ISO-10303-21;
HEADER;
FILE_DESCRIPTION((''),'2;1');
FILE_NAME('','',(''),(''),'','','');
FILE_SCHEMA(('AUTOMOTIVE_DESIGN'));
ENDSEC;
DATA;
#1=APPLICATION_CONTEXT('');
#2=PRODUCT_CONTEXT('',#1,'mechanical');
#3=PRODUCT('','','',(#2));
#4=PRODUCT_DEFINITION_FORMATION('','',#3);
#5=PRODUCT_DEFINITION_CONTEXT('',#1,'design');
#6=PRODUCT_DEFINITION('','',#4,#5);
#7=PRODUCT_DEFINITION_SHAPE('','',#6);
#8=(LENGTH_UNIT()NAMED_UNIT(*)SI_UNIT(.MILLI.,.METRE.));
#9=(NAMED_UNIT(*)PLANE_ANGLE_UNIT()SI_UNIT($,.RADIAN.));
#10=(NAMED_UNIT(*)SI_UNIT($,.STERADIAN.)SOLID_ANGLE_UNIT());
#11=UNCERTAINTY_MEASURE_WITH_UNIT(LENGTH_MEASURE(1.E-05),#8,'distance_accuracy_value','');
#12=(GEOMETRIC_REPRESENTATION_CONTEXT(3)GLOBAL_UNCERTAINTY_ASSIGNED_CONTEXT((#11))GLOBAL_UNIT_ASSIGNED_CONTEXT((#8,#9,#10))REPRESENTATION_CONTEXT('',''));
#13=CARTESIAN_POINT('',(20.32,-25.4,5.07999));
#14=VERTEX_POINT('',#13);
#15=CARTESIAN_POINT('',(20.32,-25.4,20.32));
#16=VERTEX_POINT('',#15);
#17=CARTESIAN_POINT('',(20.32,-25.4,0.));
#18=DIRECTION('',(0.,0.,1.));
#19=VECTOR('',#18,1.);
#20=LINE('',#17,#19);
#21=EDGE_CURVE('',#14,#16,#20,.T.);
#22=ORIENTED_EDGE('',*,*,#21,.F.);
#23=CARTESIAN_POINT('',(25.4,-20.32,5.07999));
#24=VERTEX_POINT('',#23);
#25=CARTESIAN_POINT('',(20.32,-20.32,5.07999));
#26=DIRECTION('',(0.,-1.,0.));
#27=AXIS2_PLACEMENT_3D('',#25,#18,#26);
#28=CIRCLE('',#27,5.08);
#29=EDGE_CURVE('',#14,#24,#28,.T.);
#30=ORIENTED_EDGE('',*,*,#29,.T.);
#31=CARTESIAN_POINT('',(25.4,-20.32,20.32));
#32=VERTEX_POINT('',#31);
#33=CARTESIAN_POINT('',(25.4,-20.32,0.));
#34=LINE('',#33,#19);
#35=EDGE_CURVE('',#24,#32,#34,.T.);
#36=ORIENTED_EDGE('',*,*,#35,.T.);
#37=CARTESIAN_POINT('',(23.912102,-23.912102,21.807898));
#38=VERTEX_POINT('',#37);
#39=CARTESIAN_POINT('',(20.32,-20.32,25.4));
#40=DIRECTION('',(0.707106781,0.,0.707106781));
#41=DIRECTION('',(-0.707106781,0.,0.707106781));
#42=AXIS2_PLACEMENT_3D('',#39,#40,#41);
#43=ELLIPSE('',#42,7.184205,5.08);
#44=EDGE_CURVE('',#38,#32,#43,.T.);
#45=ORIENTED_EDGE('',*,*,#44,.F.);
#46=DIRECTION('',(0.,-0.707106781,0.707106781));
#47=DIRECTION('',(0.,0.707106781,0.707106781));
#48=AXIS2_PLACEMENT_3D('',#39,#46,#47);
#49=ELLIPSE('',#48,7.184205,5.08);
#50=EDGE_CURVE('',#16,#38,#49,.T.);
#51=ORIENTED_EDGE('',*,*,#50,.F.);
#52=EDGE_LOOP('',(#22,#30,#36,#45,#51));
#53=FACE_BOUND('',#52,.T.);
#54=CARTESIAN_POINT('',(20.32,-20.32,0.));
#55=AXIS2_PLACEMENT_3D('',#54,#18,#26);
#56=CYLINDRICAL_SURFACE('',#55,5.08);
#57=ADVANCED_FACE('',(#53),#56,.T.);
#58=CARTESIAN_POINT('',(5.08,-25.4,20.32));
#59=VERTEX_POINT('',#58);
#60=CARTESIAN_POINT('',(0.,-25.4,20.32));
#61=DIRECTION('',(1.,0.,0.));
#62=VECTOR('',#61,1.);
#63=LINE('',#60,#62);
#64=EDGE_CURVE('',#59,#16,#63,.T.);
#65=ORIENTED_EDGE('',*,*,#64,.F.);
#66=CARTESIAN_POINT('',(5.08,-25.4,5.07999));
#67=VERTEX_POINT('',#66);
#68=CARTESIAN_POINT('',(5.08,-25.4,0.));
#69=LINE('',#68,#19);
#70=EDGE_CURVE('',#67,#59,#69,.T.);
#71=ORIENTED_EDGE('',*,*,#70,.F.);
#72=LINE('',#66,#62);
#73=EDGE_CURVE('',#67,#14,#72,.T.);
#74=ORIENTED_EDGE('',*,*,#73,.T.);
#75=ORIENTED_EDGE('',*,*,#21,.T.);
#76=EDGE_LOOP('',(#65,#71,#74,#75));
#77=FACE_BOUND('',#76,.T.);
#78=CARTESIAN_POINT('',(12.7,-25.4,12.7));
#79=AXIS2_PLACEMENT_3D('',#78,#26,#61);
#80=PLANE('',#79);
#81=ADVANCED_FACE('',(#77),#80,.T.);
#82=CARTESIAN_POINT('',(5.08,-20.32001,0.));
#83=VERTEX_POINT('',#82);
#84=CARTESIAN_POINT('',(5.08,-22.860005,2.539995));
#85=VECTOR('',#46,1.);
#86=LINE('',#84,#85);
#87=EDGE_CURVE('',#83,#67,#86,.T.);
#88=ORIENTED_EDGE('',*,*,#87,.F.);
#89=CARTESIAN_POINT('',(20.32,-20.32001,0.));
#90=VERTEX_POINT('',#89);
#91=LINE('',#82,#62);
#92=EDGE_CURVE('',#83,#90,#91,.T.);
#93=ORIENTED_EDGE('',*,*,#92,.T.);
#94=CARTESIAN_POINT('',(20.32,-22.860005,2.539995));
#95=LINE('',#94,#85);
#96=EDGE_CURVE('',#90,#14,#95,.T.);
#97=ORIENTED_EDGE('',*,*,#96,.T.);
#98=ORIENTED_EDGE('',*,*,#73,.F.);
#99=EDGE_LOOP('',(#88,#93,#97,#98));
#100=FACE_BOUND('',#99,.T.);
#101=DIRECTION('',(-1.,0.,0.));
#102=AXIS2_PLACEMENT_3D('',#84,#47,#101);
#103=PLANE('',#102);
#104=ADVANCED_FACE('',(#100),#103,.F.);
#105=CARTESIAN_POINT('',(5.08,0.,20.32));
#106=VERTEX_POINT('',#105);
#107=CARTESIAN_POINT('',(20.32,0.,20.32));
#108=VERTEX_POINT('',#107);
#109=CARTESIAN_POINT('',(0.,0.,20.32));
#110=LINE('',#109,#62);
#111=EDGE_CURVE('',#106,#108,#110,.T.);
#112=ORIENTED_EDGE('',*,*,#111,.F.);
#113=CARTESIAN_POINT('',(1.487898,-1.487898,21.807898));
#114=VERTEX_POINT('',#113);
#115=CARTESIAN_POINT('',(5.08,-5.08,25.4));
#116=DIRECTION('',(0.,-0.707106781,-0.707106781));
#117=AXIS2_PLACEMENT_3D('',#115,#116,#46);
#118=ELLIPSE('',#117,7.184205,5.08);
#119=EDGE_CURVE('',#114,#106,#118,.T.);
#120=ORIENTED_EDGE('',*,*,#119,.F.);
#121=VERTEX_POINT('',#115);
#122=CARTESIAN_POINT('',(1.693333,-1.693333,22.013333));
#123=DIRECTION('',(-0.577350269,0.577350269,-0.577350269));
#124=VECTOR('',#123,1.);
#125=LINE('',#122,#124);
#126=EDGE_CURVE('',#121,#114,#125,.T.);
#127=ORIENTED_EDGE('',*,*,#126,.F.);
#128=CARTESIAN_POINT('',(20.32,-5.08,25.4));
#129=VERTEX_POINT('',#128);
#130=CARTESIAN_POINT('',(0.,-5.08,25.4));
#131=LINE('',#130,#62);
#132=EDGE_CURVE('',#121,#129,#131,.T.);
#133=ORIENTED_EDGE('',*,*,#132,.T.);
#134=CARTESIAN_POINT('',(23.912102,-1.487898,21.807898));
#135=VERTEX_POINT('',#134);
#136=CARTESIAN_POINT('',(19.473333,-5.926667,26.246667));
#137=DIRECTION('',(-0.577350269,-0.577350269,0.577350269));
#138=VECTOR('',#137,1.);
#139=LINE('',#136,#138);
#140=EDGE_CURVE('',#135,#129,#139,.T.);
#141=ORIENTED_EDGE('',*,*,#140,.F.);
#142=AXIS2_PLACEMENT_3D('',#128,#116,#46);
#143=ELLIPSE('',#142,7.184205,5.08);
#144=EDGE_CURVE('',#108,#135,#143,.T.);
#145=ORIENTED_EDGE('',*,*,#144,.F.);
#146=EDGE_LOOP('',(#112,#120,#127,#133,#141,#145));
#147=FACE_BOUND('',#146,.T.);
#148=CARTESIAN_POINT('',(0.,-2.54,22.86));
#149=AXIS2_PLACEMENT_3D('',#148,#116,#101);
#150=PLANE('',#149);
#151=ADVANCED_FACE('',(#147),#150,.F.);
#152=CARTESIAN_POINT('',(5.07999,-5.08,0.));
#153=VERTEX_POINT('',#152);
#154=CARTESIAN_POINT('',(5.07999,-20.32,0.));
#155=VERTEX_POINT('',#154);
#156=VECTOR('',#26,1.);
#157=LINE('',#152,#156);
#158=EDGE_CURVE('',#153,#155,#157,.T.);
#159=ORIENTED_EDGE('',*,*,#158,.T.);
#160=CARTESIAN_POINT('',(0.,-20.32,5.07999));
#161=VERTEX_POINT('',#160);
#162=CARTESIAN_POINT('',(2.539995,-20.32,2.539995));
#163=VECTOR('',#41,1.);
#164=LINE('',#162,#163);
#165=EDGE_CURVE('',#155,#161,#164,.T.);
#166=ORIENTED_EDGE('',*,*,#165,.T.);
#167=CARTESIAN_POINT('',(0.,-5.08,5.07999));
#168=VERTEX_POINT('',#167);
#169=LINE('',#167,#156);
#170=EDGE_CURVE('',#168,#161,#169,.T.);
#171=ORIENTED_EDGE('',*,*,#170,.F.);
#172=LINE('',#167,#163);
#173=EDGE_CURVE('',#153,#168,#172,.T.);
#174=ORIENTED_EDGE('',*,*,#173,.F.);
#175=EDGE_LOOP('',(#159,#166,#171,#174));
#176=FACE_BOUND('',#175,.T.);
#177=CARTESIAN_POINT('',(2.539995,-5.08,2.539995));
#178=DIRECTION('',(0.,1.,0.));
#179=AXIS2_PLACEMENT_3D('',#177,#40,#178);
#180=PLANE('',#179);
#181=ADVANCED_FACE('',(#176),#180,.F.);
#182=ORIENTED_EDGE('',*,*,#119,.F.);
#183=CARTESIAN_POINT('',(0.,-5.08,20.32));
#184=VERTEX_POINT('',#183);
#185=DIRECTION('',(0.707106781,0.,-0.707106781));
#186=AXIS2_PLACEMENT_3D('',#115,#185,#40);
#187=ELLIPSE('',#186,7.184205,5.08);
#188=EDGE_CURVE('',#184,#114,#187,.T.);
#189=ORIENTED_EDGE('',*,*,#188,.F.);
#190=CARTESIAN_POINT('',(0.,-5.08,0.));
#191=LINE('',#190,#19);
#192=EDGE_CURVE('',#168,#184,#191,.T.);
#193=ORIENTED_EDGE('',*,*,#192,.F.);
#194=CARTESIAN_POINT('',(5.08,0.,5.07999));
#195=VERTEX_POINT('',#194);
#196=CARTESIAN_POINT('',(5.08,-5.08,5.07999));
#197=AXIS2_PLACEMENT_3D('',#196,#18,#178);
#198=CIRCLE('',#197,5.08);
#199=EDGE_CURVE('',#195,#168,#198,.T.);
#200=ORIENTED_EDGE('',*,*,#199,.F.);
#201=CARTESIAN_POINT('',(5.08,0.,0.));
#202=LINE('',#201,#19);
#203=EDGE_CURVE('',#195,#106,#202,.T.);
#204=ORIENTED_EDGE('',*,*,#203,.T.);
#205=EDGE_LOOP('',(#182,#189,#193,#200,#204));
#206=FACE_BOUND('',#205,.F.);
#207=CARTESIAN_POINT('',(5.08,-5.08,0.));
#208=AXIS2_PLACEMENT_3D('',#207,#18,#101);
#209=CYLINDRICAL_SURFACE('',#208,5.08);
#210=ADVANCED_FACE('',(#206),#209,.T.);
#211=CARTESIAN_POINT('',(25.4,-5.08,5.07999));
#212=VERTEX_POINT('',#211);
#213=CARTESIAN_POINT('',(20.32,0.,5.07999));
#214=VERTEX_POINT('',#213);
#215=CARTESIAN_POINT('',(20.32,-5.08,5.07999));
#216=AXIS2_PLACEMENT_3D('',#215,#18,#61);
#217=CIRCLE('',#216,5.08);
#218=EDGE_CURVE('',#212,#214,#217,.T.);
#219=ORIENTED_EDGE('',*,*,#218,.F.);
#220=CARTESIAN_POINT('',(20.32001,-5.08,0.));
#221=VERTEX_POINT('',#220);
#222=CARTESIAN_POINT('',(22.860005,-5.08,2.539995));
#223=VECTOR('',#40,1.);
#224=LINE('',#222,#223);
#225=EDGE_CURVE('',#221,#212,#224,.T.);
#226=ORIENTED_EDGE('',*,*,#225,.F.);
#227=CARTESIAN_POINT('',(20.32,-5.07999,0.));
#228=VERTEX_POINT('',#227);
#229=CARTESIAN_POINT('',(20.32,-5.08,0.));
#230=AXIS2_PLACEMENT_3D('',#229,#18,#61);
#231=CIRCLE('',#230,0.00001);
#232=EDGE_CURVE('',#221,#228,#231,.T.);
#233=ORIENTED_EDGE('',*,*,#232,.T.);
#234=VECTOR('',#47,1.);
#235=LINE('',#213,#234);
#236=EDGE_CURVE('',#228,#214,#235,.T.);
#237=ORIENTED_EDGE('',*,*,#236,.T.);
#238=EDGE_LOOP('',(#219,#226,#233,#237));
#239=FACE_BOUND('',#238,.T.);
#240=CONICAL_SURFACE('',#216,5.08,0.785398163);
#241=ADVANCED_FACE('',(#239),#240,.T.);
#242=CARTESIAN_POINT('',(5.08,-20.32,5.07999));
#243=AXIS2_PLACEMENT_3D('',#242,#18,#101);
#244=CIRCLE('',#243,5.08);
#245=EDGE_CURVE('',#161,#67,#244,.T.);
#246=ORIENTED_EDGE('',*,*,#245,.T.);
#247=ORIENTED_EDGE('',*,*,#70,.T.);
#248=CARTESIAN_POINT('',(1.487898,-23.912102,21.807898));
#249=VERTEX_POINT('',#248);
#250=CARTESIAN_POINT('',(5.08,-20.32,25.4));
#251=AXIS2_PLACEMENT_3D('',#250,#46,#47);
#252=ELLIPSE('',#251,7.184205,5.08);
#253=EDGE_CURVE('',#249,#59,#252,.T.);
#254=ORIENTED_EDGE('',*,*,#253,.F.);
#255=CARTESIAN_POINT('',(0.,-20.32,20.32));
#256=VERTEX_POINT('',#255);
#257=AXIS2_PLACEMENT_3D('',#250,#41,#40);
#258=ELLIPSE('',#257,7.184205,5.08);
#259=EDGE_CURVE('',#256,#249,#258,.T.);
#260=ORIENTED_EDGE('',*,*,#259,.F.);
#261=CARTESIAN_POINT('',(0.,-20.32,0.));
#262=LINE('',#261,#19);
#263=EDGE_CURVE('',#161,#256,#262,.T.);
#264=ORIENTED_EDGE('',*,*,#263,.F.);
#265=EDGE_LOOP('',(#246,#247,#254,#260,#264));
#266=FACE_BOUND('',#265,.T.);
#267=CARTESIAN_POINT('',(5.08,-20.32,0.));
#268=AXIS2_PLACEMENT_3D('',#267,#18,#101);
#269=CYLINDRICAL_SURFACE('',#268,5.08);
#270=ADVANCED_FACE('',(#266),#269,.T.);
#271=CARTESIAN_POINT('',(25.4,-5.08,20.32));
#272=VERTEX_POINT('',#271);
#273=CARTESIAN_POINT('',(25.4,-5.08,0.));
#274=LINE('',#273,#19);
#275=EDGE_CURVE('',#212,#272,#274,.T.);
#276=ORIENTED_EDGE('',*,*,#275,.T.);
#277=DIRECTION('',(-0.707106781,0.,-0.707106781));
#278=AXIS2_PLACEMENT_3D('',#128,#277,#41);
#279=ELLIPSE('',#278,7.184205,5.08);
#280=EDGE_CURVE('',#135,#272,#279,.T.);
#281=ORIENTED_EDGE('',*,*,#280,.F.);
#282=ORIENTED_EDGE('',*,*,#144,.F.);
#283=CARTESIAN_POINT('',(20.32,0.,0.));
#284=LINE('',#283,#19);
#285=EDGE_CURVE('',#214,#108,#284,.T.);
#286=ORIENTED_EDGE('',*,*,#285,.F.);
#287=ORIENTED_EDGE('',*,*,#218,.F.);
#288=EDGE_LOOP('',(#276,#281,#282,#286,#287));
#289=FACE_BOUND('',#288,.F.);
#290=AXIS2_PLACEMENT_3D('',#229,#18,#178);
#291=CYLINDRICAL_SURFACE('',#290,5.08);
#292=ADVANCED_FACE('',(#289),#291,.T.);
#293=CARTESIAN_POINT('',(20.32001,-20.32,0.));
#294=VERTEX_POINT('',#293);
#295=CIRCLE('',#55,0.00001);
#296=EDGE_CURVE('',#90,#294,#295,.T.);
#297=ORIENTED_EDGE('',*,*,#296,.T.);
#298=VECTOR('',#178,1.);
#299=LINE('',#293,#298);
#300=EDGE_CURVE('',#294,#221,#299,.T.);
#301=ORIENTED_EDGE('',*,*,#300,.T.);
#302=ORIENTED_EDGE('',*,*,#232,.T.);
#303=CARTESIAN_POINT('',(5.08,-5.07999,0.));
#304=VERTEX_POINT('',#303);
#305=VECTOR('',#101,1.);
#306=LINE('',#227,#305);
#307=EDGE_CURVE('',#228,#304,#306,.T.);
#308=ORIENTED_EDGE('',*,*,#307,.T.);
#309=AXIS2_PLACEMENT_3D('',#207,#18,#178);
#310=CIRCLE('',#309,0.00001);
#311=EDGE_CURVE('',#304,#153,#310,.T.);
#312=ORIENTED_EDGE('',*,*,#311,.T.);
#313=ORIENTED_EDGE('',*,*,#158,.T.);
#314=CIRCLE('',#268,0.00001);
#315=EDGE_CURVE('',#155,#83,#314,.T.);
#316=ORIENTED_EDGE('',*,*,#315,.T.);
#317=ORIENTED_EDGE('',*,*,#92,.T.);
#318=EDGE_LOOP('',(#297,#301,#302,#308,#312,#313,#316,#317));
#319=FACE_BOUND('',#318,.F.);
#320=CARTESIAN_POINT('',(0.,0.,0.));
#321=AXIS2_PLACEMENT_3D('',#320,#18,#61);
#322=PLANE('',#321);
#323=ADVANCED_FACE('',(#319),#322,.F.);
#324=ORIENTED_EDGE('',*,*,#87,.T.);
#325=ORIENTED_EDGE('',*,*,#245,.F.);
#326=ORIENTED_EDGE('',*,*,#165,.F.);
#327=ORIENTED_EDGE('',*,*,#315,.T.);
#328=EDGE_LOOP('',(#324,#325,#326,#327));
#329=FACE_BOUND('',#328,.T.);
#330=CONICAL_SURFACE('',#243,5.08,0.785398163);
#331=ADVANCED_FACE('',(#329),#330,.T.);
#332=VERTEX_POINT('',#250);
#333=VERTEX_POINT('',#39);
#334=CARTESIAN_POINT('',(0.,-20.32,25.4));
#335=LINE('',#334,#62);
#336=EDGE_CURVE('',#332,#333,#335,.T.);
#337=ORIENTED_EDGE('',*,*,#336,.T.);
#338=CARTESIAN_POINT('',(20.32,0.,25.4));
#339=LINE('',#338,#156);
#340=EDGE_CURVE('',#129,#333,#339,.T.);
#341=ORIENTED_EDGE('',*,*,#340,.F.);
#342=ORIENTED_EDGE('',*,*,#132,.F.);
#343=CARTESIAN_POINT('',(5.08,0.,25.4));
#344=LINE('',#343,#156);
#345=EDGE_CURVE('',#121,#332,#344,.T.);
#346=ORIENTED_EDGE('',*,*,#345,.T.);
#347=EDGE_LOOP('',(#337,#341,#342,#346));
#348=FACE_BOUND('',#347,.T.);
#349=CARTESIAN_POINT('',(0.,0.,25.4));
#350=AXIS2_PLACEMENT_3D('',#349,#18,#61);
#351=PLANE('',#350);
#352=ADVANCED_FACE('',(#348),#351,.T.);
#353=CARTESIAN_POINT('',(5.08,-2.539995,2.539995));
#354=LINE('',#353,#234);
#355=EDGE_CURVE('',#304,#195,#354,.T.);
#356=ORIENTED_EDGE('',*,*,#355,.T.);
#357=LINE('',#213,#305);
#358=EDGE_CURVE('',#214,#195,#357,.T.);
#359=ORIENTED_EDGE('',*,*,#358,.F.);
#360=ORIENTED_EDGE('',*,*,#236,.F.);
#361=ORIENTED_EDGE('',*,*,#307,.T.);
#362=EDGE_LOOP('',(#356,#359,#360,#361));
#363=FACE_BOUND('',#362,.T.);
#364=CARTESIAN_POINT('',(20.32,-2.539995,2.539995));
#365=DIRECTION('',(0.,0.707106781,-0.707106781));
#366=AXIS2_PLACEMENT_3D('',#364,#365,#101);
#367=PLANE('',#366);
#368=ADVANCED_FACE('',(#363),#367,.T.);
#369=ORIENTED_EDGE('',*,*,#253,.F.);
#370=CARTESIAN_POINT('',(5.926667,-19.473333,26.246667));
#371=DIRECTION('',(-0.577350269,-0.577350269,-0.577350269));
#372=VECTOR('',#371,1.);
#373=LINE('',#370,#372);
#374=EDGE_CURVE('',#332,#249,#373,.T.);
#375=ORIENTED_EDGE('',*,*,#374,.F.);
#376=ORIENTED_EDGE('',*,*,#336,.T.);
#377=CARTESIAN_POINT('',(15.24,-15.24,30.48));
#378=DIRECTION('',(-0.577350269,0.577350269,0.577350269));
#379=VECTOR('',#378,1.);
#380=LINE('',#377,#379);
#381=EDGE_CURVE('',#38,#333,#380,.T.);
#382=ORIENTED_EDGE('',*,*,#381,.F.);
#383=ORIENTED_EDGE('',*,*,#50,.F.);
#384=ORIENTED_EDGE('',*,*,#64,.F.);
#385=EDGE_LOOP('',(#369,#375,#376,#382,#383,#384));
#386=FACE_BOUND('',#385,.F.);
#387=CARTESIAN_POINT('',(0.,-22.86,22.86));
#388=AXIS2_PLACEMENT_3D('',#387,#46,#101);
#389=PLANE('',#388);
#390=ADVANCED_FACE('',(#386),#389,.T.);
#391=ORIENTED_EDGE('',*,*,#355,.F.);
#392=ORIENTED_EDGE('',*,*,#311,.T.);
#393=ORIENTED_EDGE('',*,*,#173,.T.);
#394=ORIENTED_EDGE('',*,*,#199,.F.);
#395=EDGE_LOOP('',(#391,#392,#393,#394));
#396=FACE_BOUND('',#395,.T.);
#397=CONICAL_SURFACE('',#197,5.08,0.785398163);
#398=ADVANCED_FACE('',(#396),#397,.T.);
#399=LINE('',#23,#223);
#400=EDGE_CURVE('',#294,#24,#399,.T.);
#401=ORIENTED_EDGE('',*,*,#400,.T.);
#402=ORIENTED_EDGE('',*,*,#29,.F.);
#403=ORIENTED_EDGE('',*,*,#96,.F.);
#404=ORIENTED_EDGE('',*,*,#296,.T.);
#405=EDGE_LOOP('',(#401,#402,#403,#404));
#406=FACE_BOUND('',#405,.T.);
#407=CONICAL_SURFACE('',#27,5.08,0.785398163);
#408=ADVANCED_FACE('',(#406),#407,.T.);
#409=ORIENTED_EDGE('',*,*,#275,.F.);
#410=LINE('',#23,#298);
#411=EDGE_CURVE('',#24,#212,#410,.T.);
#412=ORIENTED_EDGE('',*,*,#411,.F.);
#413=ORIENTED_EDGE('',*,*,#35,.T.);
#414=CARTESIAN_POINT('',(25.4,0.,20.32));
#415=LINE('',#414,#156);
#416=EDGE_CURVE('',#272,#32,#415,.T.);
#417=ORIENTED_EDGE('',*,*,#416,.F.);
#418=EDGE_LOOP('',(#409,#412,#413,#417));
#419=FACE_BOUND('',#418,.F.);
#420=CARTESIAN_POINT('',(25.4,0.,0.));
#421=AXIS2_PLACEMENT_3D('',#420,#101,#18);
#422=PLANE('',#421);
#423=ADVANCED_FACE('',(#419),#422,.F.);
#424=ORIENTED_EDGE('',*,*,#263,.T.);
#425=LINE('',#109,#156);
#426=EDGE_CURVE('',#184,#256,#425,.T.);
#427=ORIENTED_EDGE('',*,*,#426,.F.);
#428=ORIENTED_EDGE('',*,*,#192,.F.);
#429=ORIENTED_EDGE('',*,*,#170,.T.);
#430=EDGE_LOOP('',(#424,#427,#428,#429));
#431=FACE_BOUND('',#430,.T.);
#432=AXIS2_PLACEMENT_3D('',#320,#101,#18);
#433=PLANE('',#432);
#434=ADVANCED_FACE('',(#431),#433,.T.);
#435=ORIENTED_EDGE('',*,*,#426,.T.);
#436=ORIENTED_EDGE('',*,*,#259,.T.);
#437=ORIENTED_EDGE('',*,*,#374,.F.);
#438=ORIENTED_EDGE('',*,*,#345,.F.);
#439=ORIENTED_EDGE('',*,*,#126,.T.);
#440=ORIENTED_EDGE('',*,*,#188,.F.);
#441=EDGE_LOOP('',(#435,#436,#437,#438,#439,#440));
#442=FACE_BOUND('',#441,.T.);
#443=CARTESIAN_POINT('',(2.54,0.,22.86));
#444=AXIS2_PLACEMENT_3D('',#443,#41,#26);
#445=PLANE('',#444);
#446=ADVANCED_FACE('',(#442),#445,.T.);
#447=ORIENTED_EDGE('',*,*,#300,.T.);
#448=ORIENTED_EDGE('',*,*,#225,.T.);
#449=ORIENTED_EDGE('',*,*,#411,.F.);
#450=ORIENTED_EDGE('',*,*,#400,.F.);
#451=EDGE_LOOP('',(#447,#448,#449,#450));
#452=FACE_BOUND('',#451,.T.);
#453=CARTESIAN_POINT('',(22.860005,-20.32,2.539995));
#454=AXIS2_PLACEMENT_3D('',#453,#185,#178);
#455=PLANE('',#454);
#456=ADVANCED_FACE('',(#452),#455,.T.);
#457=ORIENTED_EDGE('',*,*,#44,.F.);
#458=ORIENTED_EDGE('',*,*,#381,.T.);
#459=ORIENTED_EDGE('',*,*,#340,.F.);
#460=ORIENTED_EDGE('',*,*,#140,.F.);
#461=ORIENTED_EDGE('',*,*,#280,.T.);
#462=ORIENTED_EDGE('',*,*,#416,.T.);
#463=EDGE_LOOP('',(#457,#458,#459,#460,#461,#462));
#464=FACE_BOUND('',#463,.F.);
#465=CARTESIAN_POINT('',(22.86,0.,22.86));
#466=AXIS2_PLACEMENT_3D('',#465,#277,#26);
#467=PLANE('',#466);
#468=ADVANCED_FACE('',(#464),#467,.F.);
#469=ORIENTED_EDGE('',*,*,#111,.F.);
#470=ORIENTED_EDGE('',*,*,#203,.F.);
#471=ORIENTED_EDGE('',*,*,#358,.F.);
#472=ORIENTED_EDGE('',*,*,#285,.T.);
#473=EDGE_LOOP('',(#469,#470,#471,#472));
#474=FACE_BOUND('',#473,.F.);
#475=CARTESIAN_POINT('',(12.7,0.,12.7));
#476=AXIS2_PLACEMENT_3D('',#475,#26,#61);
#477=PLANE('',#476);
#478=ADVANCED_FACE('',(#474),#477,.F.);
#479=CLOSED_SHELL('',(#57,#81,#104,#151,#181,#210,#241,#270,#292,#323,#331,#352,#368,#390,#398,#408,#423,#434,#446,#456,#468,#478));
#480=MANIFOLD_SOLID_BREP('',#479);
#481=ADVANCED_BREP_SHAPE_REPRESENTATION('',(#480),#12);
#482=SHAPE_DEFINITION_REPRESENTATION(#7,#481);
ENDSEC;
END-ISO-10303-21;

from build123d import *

# Parameters (mm, degrees)
F0_W     = 25.4
F0_H     = 25.4
F1_DEPTH = 25.4
F2_SIZE  = 5.08
F3_R     = 5.08
F4_SIZE  = 5.07999


# Not quite as in the source:
# - a fillet or chamfer is up to 0.001 mm smaller than in the source, because OpenCascade refuses the exact size


with BuildPart() as f1:
    # F0 (on Front) → F1 (new body)
    with BuildSketch(Plane.XZ):
        with Locations((12.7, 12.7)):
            Rectangle(F0_W, F0_H)
    extrude(amount=F1_DEPTH)

    # F2
    f2_edges = [f1.edges().sort_by_distance(p)[0] for p in [
        (25.4, -12.7, 25.4),
        (12.7, -25.4, 25.4),
        (12.7, 0, 25.4),
        (0, -12.7, 25.4),
    ]]
    chamfer(f2_edges, length=F2_SIZE)

    # F3
    f3_edges = [f1.edges().sort_by_distance(p)[0] for p in [
        (25.4, -25.4, 10.16),
        (25.4, 0, 10.16),
        (0, -25.4, 10.16),
        (0, 0, 10.16),
    ]]
    fillet(f3_edges, radius=F3_R)

    # F4 (size 5.08 in the source; OpenCascade refuses exactly that, so slightly less here)
    f4_edges = [f1.edges().sort_by_distance(p)[0] for p in [
        (12.7, -25.4, 0),
    ]]
    chamfer(f4_edges, length=F4_SIZE)


solid = f1.part
